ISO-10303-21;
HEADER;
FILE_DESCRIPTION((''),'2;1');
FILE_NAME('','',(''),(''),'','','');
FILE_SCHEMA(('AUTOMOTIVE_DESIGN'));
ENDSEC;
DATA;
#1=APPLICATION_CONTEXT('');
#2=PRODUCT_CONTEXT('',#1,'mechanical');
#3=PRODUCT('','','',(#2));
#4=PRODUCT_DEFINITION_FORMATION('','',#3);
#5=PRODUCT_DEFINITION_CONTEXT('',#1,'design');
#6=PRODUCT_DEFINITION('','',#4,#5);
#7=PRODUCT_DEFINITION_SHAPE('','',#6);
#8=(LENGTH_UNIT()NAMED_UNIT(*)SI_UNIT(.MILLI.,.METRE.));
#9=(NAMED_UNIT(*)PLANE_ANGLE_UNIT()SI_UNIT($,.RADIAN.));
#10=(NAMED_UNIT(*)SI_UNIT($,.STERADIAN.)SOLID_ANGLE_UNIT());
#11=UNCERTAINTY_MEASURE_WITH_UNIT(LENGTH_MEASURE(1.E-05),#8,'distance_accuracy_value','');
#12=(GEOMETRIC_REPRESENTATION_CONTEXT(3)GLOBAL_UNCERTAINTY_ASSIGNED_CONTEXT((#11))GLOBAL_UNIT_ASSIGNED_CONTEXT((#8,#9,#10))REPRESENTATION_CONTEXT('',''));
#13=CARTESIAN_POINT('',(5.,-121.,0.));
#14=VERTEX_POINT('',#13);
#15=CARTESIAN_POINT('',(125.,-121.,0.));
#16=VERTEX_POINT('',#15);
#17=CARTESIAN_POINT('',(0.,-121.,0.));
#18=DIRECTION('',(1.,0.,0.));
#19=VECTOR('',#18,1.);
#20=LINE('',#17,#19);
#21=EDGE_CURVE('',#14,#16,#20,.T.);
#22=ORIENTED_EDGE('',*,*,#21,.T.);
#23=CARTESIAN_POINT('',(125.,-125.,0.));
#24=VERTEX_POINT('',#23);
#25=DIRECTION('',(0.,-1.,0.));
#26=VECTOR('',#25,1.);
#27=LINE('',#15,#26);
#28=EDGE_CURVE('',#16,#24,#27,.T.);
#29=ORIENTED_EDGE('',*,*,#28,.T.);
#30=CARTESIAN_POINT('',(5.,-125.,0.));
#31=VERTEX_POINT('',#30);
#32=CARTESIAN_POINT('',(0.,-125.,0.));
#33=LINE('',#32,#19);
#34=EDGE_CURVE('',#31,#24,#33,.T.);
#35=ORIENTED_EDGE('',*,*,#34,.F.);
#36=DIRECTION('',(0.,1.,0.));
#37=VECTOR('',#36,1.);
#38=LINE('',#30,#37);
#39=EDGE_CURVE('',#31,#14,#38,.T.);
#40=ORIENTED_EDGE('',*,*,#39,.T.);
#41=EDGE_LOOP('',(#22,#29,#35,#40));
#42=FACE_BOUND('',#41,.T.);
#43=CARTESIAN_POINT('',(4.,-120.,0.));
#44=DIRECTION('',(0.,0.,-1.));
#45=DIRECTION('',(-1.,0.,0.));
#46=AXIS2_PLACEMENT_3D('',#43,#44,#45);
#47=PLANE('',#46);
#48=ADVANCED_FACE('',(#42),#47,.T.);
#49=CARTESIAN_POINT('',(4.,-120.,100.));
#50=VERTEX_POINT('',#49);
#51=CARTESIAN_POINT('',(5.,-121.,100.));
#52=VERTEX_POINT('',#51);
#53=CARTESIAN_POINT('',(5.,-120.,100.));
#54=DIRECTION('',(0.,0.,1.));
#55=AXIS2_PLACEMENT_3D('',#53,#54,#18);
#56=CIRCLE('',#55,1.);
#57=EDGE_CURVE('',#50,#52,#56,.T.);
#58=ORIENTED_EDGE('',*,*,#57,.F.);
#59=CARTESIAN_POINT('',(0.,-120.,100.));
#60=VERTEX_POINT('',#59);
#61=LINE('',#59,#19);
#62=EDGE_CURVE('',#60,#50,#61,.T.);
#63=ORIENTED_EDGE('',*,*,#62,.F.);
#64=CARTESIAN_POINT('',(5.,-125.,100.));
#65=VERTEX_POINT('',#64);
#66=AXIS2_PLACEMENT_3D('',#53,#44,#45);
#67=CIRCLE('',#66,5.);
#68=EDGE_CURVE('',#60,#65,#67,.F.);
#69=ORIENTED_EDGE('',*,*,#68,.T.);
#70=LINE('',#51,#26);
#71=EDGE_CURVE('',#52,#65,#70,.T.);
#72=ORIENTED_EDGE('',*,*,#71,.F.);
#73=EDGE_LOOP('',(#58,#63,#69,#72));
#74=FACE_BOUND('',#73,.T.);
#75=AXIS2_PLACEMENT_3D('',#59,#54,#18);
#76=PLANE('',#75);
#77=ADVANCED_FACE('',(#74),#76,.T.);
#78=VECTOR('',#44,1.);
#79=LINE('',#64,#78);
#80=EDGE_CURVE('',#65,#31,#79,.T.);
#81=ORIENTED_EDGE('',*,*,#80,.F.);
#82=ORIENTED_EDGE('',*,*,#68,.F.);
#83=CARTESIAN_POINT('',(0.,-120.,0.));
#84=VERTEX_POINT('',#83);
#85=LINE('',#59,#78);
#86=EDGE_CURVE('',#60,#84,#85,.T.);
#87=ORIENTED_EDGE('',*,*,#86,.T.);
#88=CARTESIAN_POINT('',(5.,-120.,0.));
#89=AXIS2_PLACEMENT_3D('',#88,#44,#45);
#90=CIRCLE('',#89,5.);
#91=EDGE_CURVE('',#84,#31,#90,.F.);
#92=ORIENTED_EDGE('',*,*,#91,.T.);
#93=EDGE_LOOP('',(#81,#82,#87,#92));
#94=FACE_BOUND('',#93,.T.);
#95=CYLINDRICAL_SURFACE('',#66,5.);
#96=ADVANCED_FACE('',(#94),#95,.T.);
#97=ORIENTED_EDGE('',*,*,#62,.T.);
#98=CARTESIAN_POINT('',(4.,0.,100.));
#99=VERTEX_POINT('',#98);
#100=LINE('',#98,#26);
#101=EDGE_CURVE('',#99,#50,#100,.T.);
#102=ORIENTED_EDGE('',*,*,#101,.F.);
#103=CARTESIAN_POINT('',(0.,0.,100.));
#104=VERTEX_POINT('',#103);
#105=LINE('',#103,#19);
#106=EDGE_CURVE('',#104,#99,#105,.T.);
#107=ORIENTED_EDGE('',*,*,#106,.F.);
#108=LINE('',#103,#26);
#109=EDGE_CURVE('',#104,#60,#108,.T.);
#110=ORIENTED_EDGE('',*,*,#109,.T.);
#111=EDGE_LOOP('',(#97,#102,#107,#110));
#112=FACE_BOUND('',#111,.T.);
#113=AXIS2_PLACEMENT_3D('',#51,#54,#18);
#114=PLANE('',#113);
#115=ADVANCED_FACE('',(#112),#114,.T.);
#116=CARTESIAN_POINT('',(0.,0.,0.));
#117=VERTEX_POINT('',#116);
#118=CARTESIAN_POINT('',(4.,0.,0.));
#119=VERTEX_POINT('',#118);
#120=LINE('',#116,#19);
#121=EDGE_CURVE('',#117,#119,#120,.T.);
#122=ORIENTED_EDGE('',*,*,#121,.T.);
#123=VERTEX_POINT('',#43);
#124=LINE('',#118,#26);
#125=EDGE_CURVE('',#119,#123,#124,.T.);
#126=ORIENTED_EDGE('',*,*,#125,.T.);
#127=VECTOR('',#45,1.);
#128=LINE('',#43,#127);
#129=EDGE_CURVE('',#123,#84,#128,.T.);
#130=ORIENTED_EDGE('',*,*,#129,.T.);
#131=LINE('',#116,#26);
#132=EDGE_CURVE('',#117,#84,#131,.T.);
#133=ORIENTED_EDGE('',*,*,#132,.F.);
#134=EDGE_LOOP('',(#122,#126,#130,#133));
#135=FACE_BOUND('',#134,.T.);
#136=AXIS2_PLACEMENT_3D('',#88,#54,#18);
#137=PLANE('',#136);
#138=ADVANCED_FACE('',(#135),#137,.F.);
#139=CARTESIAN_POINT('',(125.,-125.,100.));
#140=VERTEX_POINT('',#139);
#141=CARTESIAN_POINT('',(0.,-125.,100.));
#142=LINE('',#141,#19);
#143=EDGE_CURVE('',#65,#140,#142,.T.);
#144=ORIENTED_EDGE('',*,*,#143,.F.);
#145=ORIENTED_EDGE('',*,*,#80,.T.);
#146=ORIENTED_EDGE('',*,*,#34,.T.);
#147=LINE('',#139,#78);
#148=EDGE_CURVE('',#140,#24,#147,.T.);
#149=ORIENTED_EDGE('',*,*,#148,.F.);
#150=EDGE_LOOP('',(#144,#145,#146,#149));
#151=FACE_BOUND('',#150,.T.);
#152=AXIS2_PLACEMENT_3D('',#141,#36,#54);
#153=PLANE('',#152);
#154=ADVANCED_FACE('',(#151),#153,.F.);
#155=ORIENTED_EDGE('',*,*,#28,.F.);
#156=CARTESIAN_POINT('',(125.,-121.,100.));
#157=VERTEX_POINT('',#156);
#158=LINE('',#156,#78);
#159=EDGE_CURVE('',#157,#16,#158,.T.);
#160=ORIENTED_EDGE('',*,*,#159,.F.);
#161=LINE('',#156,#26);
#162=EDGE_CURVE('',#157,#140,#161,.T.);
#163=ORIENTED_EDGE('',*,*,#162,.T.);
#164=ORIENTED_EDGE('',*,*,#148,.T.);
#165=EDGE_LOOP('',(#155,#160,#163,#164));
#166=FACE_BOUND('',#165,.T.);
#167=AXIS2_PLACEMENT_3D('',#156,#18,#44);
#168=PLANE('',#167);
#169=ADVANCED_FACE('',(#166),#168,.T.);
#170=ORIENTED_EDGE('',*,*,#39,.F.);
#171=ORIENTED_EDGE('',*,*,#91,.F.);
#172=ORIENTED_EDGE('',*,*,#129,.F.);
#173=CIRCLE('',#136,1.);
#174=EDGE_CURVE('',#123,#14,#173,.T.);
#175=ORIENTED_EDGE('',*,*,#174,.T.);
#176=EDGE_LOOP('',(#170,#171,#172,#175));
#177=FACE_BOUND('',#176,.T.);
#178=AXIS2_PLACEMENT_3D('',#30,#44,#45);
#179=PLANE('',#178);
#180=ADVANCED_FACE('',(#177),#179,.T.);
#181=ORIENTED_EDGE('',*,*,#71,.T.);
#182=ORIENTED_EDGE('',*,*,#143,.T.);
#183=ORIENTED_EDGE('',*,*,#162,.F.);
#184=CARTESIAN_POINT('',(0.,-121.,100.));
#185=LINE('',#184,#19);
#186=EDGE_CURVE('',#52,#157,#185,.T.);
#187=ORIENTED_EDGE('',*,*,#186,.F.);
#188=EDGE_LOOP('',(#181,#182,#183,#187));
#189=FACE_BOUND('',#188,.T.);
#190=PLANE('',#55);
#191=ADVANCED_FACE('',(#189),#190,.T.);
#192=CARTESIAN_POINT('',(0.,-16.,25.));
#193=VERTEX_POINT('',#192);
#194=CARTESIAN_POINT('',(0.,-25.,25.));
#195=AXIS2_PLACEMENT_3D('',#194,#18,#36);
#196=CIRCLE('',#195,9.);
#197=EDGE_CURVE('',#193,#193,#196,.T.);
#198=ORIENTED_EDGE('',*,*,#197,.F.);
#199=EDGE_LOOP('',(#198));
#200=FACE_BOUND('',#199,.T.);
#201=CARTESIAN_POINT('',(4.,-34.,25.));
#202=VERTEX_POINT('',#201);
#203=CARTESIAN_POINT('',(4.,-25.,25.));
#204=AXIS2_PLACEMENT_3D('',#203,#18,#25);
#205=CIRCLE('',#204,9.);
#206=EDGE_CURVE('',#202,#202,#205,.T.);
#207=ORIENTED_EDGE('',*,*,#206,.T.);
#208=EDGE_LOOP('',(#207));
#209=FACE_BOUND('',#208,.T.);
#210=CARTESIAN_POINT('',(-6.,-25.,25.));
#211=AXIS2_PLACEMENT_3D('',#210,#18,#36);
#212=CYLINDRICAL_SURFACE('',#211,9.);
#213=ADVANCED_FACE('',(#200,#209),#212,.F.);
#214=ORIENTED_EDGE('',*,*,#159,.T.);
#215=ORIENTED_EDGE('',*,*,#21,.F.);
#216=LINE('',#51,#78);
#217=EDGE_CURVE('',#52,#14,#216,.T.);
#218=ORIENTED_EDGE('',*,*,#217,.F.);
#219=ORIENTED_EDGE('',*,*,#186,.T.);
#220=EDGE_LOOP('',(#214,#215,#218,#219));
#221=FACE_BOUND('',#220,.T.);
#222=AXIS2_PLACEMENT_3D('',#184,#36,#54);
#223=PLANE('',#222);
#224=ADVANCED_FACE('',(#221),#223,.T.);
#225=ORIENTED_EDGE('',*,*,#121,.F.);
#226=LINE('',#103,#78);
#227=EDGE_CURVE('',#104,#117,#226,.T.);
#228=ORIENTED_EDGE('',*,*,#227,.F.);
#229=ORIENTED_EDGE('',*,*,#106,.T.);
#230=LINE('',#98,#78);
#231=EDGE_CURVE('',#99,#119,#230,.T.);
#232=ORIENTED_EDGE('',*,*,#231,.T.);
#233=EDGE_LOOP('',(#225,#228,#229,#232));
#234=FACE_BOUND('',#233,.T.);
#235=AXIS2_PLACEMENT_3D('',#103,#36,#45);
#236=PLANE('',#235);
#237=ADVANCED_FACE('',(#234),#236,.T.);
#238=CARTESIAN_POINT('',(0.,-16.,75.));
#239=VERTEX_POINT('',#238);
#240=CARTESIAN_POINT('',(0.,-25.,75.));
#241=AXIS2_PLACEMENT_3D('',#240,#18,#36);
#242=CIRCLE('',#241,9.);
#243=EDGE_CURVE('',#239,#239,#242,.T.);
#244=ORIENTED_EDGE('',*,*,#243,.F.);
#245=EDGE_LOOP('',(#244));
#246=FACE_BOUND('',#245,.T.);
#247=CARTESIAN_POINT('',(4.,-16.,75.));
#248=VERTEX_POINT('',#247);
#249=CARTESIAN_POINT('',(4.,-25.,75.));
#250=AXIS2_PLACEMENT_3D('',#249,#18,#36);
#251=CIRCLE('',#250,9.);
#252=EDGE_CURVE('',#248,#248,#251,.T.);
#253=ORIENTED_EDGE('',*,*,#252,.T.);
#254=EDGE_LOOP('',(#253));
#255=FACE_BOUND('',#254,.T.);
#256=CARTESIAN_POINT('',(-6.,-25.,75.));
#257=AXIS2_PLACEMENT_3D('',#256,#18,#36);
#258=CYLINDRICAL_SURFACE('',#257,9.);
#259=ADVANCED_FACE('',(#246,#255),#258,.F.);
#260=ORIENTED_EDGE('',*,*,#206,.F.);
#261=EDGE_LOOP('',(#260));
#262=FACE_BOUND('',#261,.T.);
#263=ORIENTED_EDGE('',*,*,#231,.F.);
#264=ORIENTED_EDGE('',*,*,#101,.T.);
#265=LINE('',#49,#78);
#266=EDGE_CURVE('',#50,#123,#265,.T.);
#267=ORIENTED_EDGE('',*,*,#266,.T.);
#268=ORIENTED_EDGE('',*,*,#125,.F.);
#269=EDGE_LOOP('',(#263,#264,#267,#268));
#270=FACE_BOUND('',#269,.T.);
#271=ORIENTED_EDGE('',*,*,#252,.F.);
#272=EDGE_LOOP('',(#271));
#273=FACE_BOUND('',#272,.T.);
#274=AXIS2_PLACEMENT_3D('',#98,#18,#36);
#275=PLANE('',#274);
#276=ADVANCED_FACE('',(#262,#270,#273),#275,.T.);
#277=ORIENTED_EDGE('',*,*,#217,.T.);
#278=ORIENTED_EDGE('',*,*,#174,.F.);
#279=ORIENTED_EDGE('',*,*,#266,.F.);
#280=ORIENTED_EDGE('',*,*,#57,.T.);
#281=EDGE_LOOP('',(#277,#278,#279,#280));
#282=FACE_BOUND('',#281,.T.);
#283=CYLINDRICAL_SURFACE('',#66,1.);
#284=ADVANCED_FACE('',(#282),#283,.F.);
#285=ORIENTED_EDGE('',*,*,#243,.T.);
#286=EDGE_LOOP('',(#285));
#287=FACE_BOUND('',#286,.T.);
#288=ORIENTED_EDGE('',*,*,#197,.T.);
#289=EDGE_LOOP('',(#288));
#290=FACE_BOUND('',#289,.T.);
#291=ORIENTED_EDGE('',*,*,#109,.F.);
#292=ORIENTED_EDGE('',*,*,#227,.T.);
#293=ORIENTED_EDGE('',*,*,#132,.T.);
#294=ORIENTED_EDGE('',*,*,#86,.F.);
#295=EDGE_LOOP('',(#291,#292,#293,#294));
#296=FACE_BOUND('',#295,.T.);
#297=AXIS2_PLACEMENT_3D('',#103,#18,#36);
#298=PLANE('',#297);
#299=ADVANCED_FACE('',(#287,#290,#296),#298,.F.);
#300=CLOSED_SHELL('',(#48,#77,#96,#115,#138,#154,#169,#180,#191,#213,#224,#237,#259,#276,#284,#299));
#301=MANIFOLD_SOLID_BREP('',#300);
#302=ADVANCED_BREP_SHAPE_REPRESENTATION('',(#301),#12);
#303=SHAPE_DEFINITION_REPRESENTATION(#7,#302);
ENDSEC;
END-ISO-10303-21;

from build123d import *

# Parameters (mm, degrees)
SM_BASE_FLANGE_1_DEPTH = 100
SKETCH_6_R             = 9
CUT_EXTRUDE_1_DEPTH    = 10


# Sheet-metal steps are written as plain solids
with BuildPart() as part:
    # Sketch 1 → Базовая кромка1 (new body)
    with BuildSketch(Plane.XY):
        with BuildLine():
            Line((0, 0), (0, -120))
            ThreePointArc((0, -120), (1.464466094, -123.535533906), (5, -125))
            Line((5, -125), (125, -125))
            Line((125, -125), (125, -121))
            Line((125, -121), (5, -121))
            ThreePointArc((5, -121), (4.292893219, -120.707106781), (4, -120))
            Line((4, -120), (4, 0))
            Line((4, 0), (0, 0))
        make_face()
    extrude(amount=SM_BASE_FLANGE_1_DEPTH)

    # Эскиз6 → Вырез-Вытянуть1 (cut)
    with BuildSketch(Plane(origin=(4, 0, 0), x_dir=(0, 0, -1), z_dir=(1, 0, 0))):
        with Locations(Location((-75, -25, 0), (0, 0, 90))):
            Circle(SKETCH_6_R)
        with Locations(Location((-25, -25, 0), (0, 0, 90))):
            Circle(SKETCH_6_R)
    extrude(amount=-CUT_EXTRUDE_1_DEPTH, mode=Mode.SUBTRACT)


solid = part.part
